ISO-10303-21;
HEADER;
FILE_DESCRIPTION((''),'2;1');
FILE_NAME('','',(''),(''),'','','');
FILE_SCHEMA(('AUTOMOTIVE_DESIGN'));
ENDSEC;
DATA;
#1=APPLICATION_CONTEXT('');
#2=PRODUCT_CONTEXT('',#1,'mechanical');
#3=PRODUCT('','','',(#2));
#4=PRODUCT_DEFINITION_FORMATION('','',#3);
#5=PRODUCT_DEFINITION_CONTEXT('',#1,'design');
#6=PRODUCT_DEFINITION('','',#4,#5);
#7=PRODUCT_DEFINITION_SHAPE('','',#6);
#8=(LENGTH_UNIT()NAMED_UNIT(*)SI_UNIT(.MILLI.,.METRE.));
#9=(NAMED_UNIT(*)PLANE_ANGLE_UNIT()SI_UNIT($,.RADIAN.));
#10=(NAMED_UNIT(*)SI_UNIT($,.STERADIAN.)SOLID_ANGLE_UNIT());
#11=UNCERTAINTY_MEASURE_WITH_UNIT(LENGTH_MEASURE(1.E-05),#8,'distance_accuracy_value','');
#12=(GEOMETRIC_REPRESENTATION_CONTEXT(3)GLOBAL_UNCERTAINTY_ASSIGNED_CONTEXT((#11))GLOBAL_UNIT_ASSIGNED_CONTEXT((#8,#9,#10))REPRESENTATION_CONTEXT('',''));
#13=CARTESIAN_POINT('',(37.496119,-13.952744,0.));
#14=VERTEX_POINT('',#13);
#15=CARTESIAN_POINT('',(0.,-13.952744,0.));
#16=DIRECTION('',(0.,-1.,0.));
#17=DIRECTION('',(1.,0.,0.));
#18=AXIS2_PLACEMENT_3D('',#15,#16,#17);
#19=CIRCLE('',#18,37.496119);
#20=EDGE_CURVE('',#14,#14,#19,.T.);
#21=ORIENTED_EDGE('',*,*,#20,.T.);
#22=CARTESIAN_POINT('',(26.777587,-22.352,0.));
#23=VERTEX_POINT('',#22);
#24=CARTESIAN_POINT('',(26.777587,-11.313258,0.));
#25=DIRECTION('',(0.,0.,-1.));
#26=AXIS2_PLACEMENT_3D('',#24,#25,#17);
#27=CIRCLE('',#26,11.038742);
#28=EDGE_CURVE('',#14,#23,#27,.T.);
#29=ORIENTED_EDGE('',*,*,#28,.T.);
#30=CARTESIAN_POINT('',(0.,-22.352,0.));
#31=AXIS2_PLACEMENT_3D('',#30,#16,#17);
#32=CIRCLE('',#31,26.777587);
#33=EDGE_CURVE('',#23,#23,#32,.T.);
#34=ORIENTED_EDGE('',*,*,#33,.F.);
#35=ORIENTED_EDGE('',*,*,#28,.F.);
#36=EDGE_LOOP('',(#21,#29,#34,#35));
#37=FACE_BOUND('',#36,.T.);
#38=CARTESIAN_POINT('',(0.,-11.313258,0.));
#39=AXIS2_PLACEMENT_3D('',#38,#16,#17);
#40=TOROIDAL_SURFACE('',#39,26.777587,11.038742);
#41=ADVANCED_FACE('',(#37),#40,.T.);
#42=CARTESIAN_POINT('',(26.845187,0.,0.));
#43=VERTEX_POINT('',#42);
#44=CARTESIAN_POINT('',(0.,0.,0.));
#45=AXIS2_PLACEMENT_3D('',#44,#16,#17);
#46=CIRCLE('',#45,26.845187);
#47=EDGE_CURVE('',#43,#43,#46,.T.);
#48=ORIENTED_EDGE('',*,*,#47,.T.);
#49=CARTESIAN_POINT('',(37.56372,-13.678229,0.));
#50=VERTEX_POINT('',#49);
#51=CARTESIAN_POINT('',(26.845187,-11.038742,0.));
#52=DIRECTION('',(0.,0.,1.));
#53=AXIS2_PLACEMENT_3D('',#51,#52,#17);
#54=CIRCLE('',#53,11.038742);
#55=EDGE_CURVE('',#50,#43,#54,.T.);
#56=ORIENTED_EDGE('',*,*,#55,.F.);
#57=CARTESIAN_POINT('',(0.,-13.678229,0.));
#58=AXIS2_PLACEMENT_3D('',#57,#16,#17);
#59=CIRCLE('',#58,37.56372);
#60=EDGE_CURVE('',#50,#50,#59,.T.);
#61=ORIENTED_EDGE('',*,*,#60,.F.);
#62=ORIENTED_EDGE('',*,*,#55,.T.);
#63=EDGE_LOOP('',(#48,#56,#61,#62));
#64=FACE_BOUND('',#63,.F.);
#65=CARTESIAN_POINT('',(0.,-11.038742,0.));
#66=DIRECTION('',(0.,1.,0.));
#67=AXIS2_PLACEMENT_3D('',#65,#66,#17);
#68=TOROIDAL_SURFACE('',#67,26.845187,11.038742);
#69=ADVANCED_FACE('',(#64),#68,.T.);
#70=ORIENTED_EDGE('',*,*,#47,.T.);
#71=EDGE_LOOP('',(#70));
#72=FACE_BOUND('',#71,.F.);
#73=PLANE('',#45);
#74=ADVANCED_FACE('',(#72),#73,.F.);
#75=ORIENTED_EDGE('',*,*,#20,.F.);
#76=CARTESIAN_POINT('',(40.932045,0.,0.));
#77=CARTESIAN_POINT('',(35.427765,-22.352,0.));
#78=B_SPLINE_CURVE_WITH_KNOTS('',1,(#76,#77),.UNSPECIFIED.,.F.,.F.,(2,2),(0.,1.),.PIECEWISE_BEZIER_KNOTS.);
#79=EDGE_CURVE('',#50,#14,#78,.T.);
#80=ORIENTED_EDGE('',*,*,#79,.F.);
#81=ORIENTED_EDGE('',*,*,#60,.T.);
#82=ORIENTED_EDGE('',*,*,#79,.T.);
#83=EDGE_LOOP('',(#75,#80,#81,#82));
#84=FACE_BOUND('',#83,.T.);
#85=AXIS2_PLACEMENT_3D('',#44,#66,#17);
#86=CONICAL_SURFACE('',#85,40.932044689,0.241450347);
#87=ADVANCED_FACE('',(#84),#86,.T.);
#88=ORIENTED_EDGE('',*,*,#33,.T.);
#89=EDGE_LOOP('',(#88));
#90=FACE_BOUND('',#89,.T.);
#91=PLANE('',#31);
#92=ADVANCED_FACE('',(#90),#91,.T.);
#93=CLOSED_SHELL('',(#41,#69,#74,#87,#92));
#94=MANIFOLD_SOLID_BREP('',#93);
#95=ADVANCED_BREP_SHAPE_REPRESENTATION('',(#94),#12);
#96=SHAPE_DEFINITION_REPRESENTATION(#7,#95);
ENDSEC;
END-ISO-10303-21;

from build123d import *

# Parameters (mm, degrees)
F0_R = 40.932044689
F2_R = 35.4277651733
F4_R = 11.0387423769


with BuildPart() as f3:
    # F0 (on Front) → F3 section 0
    with BuildSketch(Plane.XZ):
        Circle(F0_R)
    # F2 (on offset) → F3 section 1
    with BuildSketch(Plane.XZ.offset(22.352)):
        Circle(F2_R)
    loft()

    # F4
    f4_edges = [f3.edges().sort_by_distance(p)[0] for p in [
        (-35.427765, -22.352, 0),
        (-40.932045, 0, 0),
        (38.179905, -11.176, 0),
    ]]
    fillet(f4_edges, radius=F4_R)


solid = f3.part
